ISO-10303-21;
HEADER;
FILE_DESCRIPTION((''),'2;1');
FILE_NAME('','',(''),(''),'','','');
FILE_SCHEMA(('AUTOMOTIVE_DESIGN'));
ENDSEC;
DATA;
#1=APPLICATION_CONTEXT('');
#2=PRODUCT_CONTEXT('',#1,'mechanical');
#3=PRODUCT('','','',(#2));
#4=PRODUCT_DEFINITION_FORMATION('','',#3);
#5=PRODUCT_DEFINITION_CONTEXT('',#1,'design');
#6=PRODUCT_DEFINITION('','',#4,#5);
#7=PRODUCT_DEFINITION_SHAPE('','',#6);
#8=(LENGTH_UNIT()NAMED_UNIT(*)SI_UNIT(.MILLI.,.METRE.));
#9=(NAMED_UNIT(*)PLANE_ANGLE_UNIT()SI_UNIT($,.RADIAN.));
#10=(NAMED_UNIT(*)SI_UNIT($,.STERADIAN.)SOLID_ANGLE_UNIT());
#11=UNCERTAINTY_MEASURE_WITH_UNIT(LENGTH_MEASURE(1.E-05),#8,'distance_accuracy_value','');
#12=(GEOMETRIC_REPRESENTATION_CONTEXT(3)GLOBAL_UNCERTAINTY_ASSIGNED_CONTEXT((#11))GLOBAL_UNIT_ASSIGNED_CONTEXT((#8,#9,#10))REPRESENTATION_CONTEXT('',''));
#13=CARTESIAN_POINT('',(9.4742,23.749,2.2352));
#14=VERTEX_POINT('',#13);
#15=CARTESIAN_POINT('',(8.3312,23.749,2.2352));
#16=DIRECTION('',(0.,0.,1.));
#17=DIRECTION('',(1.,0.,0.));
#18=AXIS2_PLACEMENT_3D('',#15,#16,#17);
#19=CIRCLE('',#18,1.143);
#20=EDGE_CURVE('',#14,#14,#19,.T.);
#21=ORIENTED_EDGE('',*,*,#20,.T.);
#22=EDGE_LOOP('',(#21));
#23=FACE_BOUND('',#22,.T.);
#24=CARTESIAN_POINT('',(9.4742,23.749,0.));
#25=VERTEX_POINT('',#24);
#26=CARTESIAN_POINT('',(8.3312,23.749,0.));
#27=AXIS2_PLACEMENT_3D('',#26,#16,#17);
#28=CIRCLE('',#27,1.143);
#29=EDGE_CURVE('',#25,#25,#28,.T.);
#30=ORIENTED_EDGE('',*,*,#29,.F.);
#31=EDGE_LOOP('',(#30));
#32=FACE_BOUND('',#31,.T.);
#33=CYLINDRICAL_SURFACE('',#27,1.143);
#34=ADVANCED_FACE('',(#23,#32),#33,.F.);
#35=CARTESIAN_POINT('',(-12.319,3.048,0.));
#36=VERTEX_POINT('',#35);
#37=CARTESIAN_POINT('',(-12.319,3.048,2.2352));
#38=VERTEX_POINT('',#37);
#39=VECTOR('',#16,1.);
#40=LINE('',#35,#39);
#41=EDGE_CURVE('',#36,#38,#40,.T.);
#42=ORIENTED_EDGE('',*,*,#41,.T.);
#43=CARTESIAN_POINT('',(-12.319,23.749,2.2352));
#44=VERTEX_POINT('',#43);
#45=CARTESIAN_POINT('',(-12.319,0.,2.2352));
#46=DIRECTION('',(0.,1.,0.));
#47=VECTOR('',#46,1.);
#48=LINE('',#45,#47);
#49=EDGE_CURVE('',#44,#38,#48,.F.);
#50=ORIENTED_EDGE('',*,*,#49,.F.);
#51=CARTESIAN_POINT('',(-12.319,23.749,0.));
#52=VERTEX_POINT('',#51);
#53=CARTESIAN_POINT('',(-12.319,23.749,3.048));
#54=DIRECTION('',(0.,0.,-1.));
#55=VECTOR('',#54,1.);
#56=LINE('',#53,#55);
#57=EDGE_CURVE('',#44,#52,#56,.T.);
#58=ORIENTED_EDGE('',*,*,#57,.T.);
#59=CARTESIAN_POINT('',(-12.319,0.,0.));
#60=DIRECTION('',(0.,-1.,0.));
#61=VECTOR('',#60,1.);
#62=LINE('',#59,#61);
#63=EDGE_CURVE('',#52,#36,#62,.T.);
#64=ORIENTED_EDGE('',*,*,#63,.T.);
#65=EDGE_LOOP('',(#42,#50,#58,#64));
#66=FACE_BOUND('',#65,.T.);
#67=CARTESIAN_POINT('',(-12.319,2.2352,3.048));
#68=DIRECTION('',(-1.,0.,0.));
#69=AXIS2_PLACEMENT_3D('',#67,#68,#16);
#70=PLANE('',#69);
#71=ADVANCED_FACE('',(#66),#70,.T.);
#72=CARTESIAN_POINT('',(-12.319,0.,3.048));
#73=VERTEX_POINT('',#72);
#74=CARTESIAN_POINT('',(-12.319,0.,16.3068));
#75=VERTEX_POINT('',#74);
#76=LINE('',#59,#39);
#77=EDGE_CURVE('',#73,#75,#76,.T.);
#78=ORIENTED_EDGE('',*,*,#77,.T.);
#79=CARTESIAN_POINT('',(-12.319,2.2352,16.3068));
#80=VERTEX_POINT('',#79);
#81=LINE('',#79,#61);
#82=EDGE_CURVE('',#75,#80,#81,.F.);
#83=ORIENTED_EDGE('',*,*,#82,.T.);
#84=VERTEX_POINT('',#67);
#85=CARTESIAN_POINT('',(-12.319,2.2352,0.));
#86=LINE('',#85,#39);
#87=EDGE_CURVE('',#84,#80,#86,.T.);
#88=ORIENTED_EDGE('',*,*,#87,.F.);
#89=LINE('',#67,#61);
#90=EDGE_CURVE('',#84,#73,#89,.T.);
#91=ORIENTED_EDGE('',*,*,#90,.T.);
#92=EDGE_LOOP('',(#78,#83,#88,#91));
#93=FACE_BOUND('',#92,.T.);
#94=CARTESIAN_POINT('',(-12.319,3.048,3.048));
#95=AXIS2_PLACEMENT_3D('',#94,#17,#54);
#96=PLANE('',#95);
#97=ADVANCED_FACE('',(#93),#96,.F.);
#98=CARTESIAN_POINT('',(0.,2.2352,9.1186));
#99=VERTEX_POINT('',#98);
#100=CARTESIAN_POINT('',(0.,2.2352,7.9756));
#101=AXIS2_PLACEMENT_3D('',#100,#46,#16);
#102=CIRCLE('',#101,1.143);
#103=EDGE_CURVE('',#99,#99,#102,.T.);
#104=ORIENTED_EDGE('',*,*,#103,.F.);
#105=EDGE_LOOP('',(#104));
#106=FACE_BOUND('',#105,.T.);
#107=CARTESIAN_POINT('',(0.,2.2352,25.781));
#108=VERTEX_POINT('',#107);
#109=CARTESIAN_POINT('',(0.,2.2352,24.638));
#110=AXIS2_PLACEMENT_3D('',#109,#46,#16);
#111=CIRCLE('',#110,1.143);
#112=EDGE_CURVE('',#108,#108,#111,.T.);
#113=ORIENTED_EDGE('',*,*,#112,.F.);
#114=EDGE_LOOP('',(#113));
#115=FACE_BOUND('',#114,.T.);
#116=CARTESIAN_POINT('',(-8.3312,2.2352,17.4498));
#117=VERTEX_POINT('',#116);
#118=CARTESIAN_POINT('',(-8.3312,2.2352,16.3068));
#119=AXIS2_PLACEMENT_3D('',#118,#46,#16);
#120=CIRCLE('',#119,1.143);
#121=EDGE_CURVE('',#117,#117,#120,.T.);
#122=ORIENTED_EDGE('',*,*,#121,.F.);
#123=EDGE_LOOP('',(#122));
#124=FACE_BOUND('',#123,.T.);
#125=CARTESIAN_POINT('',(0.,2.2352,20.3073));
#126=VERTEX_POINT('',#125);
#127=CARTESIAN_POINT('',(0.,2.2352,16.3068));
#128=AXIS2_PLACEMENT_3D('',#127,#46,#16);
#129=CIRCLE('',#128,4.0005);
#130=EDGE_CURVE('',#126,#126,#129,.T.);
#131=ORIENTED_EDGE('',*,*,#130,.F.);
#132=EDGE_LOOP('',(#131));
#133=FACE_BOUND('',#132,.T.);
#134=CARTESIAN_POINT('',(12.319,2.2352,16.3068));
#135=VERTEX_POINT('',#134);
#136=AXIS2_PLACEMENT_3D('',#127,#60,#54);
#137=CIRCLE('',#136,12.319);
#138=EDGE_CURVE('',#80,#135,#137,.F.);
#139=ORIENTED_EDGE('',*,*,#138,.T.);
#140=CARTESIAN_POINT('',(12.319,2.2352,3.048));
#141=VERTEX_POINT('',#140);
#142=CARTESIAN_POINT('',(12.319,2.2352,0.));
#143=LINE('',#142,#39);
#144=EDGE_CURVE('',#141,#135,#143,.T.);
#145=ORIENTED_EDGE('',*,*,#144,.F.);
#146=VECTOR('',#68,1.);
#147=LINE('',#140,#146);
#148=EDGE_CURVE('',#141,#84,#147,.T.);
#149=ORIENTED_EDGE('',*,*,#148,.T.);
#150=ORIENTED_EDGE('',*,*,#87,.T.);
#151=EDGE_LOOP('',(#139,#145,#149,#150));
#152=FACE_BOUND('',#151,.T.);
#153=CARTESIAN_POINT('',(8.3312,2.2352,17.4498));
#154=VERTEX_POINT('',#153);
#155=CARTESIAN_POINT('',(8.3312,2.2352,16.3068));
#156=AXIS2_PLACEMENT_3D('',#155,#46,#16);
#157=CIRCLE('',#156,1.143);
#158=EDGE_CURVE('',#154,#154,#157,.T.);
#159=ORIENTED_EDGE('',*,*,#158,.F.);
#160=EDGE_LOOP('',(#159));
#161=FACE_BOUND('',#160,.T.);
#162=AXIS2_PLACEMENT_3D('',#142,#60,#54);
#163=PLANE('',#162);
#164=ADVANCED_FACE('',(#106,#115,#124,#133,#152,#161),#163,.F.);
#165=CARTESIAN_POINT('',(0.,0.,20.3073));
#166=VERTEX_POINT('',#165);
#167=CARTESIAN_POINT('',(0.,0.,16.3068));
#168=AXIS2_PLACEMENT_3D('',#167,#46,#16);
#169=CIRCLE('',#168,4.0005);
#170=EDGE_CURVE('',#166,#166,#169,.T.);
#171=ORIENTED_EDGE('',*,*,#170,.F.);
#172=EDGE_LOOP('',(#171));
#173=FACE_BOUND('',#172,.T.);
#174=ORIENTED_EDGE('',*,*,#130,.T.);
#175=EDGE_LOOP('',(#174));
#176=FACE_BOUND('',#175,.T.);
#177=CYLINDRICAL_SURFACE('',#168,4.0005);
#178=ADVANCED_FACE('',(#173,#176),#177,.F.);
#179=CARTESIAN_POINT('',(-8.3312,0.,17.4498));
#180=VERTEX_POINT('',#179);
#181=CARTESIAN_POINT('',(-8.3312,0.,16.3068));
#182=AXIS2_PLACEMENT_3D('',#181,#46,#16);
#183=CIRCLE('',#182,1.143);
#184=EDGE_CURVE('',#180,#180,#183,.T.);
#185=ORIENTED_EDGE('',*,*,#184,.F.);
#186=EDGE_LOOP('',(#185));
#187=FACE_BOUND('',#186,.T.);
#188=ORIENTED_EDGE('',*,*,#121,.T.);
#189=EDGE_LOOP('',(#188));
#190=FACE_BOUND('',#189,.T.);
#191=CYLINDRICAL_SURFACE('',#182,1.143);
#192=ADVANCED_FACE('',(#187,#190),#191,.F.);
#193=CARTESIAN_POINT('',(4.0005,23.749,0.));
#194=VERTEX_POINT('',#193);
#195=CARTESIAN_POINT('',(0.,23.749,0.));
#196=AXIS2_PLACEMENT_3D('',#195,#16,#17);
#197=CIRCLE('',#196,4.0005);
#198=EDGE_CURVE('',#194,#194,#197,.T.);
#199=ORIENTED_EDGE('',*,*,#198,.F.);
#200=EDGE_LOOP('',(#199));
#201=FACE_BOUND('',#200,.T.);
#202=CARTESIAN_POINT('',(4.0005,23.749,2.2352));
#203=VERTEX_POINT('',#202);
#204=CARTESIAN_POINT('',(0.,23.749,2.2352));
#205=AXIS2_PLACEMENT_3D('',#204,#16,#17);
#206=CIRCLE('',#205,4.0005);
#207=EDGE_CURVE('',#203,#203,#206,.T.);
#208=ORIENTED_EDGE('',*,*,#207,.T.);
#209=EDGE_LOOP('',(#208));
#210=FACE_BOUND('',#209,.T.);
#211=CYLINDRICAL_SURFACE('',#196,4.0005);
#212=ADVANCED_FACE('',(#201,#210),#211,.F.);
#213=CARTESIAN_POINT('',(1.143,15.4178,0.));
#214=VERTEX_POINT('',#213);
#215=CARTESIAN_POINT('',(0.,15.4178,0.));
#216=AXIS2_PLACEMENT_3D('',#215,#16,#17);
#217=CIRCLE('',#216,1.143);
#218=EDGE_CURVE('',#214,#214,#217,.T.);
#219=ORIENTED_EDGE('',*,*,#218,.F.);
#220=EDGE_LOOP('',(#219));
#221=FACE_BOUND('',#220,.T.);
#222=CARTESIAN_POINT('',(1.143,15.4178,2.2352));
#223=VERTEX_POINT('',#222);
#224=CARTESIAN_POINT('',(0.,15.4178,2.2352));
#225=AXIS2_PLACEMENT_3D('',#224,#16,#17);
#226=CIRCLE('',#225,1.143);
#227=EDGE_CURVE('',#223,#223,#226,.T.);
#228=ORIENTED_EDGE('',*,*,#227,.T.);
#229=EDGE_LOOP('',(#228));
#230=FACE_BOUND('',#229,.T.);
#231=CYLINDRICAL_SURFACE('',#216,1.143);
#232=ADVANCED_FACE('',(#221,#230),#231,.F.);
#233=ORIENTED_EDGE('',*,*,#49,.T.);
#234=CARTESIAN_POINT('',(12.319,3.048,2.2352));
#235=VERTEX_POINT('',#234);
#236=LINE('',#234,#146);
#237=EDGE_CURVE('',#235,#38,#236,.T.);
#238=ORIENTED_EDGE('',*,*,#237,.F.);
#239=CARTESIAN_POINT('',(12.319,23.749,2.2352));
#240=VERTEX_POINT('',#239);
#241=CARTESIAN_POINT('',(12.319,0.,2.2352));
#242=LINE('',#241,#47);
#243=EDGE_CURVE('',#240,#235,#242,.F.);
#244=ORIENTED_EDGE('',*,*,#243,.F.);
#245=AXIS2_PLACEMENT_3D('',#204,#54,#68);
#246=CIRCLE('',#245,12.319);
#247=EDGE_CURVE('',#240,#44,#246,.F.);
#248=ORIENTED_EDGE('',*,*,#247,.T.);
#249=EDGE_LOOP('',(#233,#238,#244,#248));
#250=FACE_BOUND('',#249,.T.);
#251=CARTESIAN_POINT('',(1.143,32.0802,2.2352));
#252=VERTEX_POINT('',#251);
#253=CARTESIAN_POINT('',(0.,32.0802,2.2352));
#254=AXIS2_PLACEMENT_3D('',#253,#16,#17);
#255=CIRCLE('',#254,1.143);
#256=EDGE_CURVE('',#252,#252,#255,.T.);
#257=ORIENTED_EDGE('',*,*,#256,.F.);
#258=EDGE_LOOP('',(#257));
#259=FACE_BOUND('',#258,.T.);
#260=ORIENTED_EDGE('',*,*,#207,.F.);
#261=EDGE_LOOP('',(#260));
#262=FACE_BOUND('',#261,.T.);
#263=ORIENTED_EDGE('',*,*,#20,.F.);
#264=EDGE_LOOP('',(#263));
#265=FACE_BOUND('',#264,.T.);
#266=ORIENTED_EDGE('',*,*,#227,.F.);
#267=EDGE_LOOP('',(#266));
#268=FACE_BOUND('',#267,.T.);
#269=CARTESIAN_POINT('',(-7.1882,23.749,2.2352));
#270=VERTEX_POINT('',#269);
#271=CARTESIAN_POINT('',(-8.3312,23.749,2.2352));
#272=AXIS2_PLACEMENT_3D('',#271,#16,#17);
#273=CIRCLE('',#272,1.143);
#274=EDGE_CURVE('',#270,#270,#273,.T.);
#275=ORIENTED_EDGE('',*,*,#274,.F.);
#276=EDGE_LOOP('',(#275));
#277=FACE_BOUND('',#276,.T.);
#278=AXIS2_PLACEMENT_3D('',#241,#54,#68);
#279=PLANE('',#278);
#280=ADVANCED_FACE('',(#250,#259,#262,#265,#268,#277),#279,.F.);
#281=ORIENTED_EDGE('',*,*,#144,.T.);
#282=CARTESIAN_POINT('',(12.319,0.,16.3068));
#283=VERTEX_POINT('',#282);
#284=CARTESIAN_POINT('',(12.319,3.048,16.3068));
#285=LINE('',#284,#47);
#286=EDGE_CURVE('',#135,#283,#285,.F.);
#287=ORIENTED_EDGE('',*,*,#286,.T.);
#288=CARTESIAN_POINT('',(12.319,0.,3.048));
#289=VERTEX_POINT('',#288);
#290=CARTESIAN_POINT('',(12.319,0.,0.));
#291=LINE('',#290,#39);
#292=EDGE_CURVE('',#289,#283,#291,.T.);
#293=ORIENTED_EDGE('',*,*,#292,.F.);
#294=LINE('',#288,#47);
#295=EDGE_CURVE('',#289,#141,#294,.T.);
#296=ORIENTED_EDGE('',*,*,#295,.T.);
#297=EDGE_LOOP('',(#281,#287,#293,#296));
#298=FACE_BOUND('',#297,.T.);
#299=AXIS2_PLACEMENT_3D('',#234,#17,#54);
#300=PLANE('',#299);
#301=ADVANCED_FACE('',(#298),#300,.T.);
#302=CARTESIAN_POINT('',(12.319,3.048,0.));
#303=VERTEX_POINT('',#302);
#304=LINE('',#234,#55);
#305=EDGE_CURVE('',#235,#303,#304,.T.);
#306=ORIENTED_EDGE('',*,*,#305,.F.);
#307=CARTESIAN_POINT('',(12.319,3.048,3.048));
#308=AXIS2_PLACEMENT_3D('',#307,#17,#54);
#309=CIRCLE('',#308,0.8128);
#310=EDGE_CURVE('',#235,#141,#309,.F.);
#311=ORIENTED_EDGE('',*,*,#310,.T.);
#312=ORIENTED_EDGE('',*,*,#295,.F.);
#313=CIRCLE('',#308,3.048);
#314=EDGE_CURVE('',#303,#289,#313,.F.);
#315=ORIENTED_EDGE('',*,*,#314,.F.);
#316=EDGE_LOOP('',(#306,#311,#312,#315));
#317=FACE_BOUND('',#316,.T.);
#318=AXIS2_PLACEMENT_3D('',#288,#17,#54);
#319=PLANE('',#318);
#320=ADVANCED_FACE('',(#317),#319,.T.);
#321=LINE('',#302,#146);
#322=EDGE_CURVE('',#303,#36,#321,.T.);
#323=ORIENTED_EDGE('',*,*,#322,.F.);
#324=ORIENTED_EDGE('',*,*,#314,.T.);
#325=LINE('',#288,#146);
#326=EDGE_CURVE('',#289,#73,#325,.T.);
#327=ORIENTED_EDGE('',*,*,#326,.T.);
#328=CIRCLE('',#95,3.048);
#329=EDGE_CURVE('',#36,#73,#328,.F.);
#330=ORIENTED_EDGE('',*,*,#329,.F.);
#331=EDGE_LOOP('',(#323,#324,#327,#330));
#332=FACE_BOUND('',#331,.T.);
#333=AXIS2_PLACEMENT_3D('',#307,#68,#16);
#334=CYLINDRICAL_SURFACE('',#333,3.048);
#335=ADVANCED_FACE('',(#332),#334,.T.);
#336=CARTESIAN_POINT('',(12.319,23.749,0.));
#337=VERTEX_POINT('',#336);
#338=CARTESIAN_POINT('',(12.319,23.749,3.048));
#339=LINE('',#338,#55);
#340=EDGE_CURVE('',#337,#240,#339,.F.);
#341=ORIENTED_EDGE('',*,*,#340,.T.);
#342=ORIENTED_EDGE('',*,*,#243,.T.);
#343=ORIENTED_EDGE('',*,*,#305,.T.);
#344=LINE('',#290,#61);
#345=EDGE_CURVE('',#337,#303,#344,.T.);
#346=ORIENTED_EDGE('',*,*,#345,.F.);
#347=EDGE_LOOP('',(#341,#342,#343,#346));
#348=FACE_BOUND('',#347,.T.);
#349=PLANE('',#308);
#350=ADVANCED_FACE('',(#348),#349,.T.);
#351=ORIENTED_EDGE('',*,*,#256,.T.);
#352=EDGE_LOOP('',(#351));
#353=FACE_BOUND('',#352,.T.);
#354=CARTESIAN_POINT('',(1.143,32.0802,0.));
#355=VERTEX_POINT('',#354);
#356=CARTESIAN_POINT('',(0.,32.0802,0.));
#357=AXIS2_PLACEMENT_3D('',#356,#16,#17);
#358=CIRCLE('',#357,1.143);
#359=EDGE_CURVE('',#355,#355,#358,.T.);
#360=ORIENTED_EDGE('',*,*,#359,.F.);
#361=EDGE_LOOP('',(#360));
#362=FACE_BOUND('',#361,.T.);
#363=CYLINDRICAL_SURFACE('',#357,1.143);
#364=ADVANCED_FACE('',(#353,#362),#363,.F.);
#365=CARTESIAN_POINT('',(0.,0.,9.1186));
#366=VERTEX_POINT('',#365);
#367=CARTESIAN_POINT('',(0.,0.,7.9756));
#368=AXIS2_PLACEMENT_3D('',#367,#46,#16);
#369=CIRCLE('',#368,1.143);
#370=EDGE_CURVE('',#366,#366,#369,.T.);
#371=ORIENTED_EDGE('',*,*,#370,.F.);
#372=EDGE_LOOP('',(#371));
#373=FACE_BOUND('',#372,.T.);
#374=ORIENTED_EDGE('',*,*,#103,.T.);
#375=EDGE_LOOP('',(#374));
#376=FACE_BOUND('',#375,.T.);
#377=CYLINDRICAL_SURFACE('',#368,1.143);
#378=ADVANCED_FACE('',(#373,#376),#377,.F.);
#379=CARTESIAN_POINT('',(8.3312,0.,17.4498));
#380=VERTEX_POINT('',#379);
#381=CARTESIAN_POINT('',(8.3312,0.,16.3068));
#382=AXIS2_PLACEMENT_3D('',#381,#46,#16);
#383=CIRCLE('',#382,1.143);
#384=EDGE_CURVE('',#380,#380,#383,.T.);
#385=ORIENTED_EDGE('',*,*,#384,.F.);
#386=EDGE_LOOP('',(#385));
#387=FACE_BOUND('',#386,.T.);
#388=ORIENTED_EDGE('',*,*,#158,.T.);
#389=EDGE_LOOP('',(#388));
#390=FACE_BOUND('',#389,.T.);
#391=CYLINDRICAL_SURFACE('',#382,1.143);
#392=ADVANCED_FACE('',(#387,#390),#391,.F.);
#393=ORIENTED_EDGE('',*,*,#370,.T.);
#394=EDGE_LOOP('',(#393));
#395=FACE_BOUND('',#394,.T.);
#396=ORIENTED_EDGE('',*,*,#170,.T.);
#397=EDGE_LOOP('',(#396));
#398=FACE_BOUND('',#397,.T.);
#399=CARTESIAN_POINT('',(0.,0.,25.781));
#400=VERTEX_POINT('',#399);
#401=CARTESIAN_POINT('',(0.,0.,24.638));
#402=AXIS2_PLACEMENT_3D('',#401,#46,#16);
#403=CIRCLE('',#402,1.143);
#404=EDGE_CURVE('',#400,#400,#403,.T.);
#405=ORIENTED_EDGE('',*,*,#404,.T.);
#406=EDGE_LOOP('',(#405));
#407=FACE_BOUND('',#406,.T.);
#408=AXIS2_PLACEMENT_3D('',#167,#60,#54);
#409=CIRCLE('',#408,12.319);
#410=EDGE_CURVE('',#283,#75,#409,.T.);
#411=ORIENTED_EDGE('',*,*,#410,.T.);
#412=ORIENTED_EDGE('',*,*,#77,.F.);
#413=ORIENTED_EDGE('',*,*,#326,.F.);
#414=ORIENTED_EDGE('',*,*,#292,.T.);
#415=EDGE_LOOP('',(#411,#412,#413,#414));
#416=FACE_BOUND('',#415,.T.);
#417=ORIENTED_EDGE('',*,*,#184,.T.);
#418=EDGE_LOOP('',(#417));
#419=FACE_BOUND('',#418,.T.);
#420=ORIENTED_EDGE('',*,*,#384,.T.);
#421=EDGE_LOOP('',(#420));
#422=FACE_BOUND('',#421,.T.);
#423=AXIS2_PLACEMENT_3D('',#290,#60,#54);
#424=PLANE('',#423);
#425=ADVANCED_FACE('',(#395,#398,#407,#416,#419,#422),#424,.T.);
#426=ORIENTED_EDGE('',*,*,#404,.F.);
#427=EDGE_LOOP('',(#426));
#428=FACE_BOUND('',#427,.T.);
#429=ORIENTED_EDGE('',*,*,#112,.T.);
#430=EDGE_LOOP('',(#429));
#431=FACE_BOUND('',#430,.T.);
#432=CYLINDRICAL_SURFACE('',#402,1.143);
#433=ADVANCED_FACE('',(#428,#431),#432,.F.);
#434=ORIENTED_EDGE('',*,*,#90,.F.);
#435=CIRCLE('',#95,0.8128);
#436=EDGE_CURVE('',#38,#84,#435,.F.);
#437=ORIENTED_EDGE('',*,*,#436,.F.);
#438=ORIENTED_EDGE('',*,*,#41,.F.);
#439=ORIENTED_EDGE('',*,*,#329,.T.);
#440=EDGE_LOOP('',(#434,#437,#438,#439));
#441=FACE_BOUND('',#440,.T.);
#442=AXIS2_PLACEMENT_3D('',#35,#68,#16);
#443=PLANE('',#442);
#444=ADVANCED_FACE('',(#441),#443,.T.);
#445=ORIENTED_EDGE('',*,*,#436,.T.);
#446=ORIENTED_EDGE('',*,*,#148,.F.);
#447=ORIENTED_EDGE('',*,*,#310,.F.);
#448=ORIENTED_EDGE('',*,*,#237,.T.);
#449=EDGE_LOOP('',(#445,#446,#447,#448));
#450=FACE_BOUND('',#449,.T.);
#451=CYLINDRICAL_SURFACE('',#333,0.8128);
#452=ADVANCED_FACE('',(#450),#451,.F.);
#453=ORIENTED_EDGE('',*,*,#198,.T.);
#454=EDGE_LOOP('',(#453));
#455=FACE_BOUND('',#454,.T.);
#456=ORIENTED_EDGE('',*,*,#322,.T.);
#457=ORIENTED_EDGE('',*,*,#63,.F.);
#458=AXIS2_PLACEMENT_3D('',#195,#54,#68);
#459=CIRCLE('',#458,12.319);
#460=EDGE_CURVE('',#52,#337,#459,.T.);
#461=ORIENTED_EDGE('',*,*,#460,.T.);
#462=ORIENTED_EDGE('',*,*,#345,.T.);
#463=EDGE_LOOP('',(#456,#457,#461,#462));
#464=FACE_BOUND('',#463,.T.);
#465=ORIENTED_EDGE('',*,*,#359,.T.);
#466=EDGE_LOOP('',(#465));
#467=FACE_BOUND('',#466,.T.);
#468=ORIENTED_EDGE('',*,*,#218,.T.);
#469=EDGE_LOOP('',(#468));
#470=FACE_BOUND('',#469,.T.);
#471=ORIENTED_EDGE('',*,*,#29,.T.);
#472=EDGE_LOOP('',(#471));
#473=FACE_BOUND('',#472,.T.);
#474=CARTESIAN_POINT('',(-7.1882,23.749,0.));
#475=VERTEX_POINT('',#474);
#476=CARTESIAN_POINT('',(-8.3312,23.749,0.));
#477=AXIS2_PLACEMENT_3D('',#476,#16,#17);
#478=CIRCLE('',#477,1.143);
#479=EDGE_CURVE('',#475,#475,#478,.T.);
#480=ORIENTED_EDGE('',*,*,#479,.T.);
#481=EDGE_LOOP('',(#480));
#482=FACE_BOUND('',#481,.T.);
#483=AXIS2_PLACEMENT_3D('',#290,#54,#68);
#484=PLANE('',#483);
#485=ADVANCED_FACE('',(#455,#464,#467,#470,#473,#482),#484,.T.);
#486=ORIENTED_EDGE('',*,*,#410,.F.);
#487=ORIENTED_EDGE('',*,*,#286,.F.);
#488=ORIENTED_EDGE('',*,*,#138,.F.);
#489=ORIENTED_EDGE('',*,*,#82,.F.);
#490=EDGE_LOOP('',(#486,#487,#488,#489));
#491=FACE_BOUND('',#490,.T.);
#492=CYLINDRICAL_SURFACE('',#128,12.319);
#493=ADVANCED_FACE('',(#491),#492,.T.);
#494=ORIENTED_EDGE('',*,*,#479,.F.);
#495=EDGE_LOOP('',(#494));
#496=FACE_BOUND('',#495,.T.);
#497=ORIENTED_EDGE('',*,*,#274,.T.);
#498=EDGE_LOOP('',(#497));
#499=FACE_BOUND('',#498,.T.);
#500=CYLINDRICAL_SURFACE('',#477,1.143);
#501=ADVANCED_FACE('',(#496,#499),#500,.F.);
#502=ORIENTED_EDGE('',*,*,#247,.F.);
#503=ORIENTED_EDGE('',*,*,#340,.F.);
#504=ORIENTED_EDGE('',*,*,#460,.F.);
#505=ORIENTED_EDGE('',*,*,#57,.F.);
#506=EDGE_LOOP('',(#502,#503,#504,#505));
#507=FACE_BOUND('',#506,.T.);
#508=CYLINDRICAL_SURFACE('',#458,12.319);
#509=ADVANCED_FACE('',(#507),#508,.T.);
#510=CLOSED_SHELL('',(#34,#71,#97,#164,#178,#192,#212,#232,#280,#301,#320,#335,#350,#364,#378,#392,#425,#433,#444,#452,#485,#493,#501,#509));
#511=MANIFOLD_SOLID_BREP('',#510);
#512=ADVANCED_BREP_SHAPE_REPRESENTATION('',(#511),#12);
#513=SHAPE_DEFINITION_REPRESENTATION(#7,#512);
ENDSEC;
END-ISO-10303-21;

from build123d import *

# Parameters (mm, degrees)
BASE_FLANGE1_DEPTH = 12.319
FILLET1_RADIUS     = 12.319
FILLET1_LENGTH     = 2.2352
FILLET2_RADIUS     = 12.319
FILLET2_LENGTH     = 2.2352
SKETCH3_R          = 4.0005
SKETCH3_R_2        = 1.143
EXTRUDE1_DEPTH     = 2.2352
SKETCH5_R          = 4.0005
SKETCH5_R_2        = 1.143
EXTRUDE2_DEPTH     = 2.2352


# Sheet-metal steps are written as plain solids
with BuildPart() as part:
    # Sketch1 → Base-Flange1 (new, symmetric)
    with BuildSketch(Plane(origin=(0, 0, 0), x_dir=(0, 0, -1), z_dir=(1, 0, 0))):
        with BuildLine():
            Line((-28.6258, 0), (-3.048, 0))
            ThreePointArc((-3.048, 0), (-0.892738531, 0.892738531), (0, 3.048))
            Line((0, 3.048), (0, 36.068))
            Line((0, 36.068), (-2.2352, 36.068))
            Line((-2.2352, 36.068), (-2.2352, 3.048))
            ThreePointArc((-2.2352, 3.048), (-2.473263608, 2.473263608), (-3.048, 2.2352))
            Line((-3.048, 2.2352), (-28.6258, 2.2352))
            Line((-28.6258, 2.2352), (-28.6258, 0))
        make_face()
    extrude(amount=BASE_FLANGE1_DEPTH, both=True)

    # Fillet1: full round fillet: the end face becomes a half cylinder, R = half its width
    fillet1_face = Plane((0, 36.068, 1.1176), x_dir=(0, 0, -1), z_dir=(0, 1, 0))  # on the end face: x along it, z out of the body
    fillet1_slab = fillet1_face.offset(-FILLET1_RADIUS / 2) * Box(FILLET1_LENGTH, 2 * FILLET1_RADIUS, FILLET1_RADIUS, mode=Mode.PRIVATE)  # the body's end, R deep
    fillet1_round = Plane((0, 23.749, 1.1176), x_dir=(0, 1, 0), z_dir=(0, 0, -1)) * Cylinder(FILLET1_RADIUS, FILLET1_LENGTH, mode=Mode.PRIVATE)  # its axis R under the face
    add(fillet1_slab - fillet1_round, mode=Mode.SUBTRACT)

    # Fillet2: full round fillet: the end face becomes a half cylinder, R = half its width
    fillet2_face = Plane((0, 1.1176, 28.6258), x_dir=(0, 1, 0), z_dir=(0, 0, 1))  # on the end face: x along it, z out of the body
    fillet2_slab = fillet2_face.offset(-FILLET2_RADIUS / 2) * Box(FILLET2_LENGTH, 2 * FILLET2_RADIUS, FILLET2_RADIUS, mode=Mode.PRIVATE)  # the body's end, R deep
    fillet2_round = Plane((0, 1.1176, 16.3068), x_dir=(0, 0, 1), z_dir=(0, 1, 0)) * Cylinder(FILLET2_RADIUS, FILLET2_LENGTH, mode=Mode.PRIVATE)  # its axis R under the face
    add(fillet2_slab - fillet2_round, mode=Mode.SUBTRACT)

    # Sketch3 → Extrude1 (cut)
    with BuildSketch(Plane.XY.offset(2.2352)):
        with Locations((0, 23.749)):
            Circle(SKETCH3_R)
        with Locations((0, 32.0802)):
            Circle(SKETCH3_R_2)
        with Locations((8.3312, 23.749)):
            Circle(SKETCH3_R_2)
        with Locations((0, 15.4178)):
            Circle(SKETCH3_R_2)
        with Locations((-8.3312, 23.749)):
            Circle(SKETCH3_R_2)
    extrude(amount=-EXTRUDE1_DEPTH, mode=Mode.SUBTRACT)

    # Sketch5 → Extrude2 (cut)
    with BuildSketch(Plane(origin=(0, 2.2352, 0), x_dir=(1, 0, 0), z_dir=(0, 1, 0))):
        with Locations(Location((0, -16.3068, 0), (0, 0, 270))):
            Circle(SKETCH5_R)
        with Locations(Location((0, -7.9756, 0), (0, 0, 270))):
            Circle(SKETCH5_R_2)
        with Locations(Location((8.3312, -16.3068, 0), (0, 0, 270))):
            Circle(SKETCH5_R_2)
        with Locations(Location((0, -24.638, 0), (0, 0, 270))):
            Circle(SKETCH5_R_2)
        with Locations(Location((-8.3312, -16.3068, 0), (0, 0, 270))):
            Circle(SKETCH5_R_2)
    extrude(amount=-EXTRUDE2_DEPTH, mode=Mode.SUBTRACT)


solid = part.part
